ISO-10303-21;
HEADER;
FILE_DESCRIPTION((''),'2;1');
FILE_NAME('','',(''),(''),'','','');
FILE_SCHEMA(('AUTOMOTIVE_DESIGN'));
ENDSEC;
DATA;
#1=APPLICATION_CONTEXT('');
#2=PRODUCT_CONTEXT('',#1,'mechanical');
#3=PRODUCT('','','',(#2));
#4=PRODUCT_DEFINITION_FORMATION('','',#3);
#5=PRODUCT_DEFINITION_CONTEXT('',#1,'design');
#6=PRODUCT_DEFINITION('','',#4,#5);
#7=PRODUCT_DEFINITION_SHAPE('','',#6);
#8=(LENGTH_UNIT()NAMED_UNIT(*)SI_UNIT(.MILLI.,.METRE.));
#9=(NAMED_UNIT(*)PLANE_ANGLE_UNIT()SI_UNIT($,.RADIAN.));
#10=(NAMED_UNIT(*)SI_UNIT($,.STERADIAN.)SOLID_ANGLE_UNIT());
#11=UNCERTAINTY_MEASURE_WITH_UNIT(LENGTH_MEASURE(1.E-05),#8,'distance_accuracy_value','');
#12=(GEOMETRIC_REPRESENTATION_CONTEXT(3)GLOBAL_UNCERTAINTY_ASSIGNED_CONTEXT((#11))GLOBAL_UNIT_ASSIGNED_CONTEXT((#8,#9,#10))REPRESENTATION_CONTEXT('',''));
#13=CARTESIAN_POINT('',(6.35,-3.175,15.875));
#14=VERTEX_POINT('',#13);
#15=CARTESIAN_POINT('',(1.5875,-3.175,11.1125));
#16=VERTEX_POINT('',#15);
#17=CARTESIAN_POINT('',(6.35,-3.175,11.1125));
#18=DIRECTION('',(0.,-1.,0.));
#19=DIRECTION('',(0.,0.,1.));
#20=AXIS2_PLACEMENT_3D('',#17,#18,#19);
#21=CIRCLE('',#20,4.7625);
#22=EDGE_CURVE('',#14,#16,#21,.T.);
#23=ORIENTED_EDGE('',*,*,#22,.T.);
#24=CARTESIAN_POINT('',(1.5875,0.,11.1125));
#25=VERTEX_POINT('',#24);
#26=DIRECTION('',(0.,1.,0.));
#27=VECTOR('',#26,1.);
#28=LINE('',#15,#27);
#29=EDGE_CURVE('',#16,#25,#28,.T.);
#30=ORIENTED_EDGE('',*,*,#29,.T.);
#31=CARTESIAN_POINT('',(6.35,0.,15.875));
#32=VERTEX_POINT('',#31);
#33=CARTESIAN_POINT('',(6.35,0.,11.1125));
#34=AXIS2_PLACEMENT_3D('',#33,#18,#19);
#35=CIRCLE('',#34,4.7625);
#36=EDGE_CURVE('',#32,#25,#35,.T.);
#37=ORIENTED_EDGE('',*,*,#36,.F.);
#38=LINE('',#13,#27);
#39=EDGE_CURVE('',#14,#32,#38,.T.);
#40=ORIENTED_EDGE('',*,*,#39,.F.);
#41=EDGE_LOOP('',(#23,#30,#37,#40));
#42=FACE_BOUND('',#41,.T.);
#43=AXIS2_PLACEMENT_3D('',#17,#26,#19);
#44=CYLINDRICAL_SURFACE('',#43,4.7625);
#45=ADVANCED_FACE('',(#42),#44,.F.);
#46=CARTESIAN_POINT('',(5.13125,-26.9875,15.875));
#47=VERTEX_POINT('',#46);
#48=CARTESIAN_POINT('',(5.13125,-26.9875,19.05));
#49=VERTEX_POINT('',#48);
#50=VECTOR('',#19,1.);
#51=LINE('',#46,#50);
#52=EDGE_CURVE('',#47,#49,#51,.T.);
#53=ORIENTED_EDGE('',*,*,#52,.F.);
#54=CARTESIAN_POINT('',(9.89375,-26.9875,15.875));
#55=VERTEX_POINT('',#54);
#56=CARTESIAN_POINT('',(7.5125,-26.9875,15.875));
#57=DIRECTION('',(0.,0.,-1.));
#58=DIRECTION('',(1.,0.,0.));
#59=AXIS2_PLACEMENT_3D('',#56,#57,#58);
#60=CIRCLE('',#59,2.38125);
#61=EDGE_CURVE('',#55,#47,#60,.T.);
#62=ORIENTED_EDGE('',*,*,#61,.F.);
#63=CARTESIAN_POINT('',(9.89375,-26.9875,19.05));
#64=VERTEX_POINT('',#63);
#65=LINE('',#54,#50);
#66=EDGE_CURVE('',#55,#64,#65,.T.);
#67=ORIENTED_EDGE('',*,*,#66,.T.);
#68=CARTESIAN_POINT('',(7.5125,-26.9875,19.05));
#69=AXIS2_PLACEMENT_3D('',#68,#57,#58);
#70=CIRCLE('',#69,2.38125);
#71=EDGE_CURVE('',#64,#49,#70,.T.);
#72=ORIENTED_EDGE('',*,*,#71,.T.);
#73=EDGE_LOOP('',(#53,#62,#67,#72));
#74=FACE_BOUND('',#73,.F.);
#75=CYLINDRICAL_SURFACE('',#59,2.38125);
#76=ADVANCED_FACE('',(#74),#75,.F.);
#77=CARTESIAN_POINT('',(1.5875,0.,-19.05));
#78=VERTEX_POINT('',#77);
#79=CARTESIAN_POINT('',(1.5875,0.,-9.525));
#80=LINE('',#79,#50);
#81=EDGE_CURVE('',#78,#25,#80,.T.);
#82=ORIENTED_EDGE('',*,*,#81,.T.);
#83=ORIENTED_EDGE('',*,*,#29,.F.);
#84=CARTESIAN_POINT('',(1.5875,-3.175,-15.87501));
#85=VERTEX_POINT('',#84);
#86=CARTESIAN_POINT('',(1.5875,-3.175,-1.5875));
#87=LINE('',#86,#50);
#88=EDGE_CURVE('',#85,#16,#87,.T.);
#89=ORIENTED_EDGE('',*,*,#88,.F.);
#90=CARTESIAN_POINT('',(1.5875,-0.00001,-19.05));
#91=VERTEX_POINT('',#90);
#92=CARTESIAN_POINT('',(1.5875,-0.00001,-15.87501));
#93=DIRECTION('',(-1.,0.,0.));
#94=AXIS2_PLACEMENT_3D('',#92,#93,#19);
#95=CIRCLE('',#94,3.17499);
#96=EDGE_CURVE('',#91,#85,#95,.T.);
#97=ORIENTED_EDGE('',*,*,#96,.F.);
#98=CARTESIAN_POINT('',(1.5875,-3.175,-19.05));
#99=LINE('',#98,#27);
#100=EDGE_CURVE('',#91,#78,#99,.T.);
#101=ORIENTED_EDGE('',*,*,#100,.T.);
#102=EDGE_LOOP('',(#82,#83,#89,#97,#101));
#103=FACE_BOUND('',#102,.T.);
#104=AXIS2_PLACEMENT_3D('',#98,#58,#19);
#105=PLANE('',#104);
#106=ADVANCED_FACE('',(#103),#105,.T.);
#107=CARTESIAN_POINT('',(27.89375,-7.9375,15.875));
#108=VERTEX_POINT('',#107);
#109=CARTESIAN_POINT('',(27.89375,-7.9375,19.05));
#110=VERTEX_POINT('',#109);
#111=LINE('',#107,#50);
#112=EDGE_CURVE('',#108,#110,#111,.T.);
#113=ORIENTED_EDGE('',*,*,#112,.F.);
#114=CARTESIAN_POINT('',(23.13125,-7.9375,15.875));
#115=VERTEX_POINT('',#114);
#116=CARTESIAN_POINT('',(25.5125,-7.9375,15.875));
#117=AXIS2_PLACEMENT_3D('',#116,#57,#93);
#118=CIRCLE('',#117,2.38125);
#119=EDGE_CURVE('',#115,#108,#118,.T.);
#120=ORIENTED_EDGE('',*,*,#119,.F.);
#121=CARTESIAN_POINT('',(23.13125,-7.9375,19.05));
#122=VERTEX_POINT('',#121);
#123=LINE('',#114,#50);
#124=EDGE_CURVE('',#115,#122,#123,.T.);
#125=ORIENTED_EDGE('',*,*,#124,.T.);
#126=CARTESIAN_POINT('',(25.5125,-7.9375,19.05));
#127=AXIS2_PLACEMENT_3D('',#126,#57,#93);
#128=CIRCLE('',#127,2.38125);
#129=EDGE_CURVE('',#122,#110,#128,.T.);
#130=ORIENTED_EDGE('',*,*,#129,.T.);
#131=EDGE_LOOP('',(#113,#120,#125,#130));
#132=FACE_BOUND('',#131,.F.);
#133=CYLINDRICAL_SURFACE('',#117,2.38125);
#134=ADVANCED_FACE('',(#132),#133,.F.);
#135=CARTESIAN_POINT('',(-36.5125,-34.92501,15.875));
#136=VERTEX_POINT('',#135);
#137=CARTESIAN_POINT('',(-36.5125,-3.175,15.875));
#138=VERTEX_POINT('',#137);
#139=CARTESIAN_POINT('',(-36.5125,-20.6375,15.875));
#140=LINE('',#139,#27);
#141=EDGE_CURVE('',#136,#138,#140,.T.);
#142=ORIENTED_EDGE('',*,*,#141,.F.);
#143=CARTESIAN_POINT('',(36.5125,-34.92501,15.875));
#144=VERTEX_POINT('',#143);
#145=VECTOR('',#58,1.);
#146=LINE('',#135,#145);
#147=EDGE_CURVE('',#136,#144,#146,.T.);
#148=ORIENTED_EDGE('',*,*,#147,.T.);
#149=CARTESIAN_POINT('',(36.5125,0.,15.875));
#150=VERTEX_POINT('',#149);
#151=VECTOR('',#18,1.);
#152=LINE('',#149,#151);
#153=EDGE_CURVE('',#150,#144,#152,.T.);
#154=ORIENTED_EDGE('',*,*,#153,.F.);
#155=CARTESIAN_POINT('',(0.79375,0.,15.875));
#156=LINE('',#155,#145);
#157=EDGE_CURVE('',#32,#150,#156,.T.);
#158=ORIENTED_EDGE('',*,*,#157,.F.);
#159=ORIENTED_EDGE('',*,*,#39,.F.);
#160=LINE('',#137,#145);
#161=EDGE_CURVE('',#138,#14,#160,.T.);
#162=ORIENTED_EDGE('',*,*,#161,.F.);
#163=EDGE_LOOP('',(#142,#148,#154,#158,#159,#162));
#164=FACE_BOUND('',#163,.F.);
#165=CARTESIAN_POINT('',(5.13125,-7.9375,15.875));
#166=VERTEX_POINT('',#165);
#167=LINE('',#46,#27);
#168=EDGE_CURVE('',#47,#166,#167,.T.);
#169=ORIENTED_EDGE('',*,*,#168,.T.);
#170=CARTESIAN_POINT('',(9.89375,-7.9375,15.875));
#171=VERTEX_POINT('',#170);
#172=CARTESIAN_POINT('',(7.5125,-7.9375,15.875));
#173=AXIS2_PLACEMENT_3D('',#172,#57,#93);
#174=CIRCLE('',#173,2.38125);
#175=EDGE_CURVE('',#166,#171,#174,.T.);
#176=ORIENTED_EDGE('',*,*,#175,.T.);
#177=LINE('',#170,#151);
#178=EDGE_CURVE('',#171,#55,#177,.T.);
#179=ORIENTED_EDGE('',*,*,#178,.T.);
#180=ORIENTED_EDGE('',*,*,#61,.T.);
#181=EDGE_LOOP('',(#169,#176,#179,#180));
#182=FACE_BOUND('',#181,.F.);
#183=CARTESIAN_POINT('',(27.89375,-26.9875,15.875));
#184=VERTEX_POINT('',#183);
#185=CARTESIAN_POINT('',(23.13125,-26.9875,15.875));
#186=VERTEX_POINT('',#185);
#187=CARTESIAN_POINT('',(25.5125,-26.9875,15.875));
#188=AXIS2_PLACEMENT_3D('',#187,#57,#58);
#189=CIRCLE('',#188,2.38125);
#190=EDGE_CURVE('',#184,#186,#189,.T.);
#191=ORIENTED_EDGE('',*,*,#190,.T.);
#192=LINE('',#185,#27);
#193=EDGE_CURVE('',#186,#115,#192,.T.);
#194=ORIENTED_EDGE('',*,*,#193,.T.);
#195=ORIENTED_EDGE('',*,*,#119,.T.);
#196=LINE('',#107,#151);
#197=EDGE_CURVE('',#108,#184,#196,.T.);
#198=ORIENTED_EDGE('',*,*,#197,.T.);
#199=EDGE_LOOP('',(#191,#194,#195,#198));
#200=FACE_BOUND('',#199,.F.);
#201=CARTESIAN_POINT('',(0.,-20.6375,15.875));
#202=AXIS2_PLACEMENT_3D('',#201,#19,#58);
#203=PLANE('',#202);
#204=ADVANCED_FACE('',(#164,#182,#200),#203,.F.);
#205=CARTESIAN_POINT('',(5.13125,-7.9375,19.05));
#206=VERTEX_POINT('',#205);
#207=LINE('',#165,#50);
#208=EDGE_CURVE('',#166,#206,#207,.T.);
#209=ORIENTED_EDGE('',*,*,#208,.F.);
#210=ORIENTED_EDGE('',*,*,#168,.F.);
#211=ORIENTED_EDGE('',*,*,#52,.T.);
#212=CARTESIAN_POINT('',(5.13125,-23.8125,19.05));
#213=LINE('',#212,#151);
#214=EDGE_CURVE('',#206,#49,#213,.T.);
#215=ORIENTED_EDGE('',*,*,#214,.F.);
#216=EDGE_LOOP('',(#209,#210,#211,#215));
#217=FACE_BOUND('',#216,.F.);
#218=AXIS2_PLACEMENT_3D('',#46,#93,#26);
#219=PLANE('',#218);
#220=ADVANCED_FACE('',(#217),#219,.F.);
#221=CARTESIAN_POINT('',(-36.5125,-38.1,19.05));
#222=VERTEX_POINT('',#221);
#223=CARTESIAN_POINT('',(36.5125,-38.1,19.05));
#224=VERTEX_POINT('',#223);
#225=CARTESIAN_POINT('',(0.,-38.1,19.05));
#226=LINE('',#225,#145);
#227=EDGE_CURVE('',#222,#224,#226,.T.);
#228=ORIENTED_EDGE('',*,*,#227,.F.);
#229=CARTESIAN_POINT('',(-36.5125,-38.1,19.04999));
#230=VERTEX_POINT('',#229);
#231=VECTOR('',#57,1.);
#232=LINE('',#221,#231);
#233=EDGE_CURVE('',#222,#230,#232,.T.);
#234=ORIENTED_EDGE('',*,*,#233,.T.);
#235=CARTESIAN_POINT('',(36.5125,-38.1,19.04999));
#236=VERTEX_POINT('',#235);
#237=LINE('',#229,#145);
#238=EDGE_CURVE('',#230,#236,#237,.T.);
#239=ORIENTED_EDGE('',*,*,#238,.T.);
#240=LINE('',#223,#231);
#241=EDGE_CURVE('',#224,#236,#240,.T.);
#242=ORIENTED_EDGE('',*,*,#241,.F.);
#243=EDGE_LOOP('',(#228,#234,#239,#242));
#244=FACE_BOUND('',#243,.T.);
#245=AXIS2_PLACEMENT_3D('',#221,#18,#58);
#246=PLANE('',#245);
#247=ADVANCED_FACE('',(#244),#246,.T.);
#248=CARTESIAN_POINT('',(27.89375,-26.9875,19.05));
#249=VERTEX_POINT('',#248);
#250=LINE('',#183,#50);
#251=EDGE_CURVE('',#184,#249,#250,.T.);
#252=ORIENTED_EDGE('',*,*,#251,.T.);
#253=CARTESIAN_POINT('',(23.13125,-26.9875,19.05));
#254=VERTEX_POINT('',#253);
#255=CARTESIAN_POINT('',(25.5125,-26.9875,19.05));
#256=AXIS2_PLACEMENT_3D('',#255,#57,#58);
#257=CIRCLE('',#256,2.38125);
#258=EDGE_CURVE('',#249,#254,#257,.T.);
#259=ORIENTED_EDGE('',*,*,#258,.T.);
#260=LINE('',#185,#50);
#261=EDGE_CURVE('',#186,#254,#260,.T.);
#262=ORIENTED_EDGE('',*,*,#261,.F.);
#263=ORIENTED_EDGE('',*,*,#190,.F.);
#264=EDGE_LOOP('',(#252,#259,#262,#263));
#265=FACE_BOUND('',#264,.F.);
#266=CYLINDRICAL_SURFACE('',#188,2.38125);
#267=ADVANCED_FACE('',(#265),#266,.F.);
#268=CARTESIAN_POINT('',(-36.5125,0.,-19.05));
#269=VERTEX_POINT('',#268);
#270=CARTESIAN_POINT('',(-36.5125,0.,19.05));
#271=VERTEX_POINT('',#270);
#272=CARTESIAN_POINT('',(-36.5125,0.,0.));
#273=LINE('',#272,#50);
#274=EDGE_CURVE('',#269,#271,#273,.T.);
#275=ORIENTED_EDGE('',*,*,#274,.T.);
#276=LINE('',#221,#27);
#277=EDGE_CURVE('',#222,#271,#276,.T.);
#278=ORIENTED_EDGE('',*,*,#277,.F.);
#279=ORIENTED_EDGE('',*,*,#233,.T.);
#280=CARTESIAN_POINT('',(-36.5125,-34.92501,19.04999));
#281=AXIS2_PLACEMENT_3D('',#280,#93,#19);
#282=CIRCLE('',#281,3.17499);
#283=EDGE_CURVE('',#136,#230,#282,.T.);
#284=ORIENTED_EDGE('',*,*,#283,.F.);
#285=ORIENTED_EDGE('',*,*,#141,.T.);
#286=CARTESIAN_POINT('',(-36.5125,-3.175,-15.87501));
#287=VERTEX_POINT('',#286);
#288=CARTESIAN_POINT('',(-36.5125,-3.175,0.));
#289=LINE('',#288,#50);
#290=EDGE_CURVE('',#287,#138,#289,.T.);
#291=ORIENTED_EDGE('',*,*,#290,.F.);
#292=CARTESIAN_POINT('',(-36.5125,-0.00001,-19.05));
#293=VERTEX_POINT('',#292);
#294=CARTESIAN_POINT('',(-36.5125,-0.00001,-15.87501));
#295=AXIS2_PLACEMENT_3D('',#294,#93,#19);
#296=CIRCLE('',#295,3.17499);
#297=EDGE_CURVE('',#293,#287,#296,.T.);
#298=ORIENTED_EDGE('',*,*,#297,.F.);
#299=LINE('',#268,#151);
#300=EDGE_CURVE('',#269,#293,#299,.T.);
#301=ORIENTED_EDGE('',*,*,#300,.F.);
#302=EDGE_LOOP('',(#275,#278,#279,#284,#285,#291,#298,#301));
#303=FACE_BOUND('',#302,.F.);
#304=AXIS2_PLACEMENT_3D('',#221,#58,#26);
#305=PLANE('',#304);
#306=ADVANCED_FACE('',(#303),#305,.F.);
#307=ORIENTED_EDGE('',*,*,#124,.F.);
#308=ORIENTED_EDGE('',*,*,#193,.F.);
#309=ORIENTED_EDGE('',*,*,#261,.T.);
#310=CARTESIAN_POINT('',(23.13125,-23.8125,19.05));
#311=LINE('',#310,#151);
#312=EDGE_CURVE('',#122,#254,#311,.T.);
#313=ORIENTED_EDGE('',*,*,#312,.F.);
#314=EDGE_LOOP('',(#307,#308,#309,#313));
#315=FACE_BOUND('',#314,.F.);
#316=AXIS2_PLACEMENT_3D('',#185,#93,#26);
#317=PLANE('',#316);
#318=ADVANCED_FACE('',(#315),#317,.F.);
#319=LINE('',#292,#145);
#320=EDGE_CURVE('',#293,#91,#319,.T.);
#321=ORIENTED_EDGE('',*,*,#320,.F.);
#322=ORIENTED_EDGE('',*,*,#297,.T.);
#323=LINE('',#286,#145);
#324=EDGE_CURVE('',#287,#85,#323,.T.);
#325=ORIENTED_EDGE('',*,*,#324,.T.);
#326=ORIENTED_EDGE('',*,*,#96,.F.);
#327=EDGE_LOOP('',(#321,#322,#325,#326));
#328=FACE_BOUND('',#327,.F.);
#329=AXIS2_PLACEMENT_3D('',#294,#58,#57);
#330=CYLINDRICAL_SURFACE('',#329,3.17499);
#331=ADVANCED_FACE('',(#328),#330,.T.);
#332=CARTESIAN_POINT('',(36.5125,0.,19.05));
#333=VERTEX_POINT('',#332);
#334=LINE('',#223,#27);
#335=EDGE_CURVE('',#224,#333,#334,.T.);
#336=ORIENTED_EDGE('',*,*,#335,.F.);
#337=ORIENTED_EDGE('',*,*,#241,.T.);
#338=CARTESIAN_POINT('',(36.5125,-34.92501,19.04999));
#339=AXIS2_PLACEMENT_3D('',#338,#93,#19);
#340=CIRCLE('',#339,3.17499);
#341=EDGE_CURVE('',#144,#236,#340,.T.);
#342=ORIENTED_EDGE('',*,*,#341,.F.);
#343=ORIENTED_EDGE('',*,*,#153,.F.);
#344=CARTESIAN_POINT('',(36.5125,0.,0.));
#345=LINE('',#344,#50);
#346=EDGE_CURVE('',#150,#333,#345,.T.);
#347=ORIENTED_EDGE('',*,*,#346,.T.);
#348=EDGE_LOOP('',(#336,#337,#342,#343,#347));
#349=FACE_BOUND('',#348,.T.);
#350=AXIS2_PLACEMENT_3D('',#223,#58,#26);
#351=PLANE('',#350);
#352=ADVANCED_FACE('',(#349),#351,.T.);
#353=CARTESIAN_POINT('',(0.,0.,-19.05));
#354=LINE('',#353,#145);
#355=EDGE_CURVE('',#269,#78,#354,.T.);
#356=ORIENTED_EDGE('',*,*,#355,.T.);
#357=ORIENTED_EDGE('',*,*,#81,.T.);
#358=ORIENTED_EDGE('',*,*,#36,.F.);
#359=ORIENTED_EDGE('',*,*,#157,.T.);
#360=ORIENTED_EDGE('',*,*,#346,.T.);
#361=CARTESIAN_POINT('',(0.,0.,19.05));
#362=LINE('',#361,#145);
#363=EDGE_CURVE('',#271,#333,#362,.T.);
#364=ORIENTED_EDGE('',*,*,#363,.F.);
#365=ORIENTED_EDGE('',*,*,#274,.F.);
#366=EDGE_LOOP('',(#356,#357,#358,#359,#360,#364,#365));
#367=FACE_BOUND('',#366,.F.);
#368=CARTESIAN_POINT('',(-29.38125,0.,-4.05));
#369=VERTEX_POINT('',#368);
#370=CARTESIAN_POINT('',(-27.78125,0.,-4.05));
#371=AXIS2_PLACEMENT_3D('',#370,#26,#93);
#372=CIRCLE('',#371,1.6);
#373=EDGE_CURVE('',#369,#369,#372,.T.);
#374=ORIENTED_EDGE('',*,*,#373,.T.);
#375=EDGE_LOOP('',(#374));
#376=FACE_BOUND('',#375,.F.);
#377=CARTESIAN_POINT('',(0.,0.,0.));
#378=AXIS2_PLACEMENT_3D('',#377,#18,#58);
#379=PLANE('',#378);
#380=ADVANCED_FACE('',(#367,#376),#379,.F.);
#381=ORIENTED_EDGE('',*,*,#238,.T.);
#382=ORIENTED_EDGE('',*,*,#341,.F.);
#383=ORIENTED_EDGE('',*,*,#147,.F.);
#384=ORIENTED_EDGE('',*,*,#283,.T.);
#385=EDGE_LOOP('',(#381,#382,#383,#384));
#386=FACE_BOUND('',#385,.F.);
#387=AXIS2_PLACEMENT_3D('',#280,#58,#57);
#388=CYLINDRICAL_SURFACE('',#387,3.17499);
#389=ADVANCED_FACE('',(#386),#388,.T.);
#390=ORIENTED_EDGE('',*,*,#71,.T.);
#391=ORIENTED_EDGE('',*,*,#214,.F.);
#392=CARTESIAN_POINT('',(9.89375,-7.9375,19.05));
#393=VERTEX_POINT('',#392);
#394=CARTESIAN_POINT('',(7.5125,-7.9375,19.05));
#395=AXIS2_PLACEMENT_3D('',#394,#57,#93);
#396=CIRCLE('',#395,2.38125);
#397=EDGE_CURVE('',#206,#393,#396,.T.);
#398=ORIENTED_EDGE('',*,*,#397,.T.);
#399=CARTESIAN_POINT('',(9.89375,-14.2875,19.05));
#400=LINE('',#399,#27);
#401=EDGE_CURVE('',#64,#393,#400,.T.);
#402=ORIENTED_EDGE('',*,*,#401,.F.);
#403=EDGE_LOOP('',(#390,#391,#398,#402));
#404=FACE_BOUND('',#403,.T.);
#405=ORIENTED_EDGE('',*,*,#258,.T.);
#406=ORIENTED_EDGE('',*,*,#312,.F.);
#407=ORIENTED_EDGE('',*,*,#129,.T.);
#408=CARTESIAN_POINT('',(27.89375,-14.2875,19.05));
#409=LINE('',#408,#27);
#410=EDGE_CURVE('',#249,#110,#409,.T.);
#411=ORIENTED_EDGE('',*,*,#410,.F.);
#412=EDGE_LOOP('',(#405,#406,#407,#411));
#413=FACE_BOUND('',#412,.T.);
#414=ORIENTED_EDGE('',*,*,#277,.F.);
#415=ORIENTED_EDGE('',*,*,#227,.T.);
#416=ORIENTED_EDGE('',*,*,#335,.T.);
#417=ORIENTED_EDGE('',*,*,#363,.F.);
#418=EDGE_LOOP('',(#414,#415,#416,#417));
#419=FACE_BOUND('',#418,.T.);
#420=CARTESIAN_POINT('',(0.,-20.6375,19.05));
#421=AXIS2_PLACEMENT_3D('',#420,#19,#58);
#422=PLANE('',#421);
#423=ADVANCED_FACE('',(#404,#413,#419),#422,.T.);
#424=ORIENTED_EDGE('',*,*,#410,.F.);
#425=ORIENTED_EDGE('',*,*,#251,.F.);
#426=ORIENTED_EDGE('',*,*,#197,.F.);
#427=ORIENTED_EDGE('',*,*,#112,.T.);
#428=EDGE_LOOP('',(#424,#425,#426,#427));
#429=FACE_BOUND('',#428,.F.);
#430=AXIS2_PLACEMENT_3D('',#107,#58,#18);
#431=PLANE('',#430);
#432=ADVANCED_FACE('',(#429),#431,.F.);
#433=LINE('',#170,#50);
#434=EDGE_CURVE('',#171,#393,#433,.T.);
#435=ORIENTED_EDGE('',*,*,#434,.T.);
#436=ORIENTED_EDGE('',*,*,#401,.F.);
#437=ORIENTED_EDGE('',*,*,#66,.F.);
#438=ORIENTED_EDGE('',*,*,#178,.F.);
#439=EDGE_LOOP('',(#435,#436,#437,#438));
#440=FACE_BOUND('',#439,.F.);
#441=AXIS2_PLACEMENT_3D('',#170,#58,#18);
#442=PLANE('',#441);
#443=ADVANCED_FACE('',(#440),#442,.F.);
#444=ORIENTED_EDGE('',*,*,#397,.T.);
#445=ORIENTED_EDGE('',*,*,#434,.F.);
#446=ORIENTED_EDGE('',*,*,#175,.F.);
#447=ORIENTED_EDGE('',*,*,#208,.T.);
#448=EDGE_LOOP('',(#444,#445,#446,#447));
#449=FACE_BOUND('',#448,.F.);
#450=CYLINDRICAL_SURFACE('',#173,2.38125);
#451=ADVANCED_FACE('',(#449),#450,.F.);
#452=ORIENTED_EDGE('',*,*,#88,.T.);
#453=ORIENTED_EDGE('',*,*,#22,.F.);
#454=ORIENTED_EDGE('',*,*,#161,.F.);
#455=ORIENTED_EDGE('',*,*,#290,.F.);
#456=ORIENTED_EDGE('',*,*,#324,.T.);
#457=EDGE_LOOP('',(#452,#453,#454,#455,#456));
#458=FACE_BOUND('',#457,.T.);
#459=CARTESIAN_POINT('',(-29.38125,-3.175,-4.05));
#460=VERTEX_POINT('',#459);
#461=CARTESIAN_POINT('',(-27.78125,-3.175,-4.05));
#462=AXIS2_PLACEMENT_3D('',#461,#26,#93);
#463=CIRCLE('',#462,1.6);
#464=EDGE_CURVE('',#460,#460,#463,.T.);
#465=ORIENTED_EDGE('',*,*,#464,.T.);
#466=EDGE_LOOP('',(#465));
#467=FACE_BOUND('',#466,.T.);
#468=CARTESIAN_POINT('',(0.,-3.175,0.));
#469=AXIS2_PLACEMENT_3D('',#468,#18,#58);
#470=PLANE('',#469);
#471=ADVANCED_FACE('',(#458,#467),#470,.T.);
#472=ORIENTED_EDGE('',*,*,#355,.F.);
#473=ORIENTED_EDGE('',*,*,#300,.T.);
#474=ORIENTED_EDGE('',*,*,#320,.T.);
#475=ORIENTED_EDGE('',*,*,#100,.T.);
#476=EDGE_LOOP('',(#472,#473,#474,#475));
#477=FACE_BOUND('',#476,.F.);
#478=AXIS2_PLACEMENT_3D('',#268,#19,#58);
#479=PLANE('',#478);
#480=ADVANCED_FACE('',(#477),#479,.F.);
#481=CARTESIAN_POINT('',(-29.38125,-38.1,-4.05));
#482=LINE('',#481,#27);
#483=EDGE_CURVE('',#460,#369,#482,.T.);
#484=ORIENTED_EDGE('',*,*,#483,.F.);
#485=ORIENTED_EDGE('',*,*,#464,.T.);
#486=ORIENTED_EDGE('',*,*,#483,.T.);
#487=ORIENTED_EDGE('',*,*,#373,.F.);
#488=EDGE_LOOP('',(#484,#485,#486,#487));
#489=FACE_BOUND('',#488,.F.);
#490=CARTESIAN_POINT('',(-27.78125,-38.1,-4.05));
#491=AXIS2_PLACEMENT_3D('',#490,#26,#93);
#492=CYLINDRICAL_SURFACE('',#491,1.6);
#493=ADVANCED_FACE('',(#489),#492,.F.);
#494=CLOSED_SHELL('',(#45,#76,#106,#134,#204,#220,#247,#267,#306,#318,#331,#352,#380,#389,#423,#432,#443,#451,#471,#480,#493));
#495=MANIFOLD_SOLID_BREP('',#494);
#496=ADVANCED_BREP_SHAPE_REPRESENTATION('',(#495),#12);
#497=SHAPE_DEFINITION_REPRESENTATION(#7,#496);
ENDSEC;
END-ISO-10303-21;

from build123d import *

# Parameters (mm, degrees)
F0_W     = 73.025
F0_H     = 38.1
F1_DEPTH = 3.175
F2_W     = 73.025
F2_H     = 34.925
F3_DEPTH = 3.175
F5_D     = 3.2
F5_DEPTH = 34.925
F5_TIP   = 0.9613769904
F7_DEPTH = 3.176
F8_W     = 34.925
F8_H     = 34.925
F9_DEPTH = 3.176
F10_R    = 3.17499
F11_R    = 4.7625


# Not quite as in the source:
# - a fillet or chamfer is up to 0.001 mm smaller than in the source, because OpenCascade refuses the exact size


with BuildPart() as f1:
    # F0 (on Front) → F1 (new body)
    with BuildSketch(Plane.XZ):
        Rectangle(F0_W, F0_H)
    extrude(amount=F1_DEPTH)

    # F2 (on face) → F3 (join)
    with BuildSketch(Plane.XY.offset(19.05)):
        with Locations((0, -20.6375)):
            Rectangle(F2_W, F2_H)
    extrude(amount=-F3_DEPTH)

    # F5
    with Locations(Plane.XZ.offset(3.175)):
        with Locations((-27.78125, -4.05)):
            Hole(F5_D / 2, depth=F5_DEPTH)
            with Locations((0, 0, -(F5_DEPTH + F5_TIP / 2))):  # 118° drill point
                Cone(0, F5_D / 2, F5_TIP, mode=Mode.SUBTRACT)

    # F6 (on face) → F7 (cut, through all)
    with BuildSketch(Plane(origin=(0, 0, 15.875), x_dir=(1, 0, 0), z_dir=(0, 0, -1))):
        with BuildLine():
            ThreePointArc((5.13125, 7.9375), (7.5125, 5.55625), (9.89375, 7.9375))
            Line((9.89375, 7.9375), (9.89375, 26.9875))
            ThreePointArc((9.89375, 26.9875), (7.5125, 29.36875), (5.13125, 26.9875))
            Line((5.13125, 26.9875), (5.13125, 7.9375))
        make_face()
        with BuildLine():
            ThreePointArc((23.13125, 7.9375), (25.5125, 5.55625), (27.89375, 7.9375))
            Line((27.89375, 7.9375), (27.89375, 26.9875))
            ThreePointArc((27.89375, 26.9875), (25.5125, 29.36875), (23.13125, 26.9875))
            Line((23.13125, 26.9875), (23.13125, 7.9375))
        make_face()
    extrude(amount=-F7_DEPTH, mode=Mode.SUBTRACT)

    # F8 (on face) → F9 (cut, through all)
    with BuildSketch(Plane.XZ.offset(3.175)):
        with Locations((19.05, -1.5875)):
            Rectangle(F8_W, F8_H)
    extrude(amount=-F9_DEPTH, mode=Mode.SUBTRACT)

    # F10 (radius 3.175 in the source; OpenCascade refuses exactly that, so slightly less here)
    f10_edges = [f1.edges().sort_by_distance(p)[0] for p in [
        (0, -38.1, 15.875),
        (-17.4625, -3.175, -19.05),
    ]]
    fillet(f10_edges, radius=F10_R)

    # F11
    f11_edges = [f1.edges().sort_by_distance(p)[0] for p in [
        (1.5875, -1.5875, 15.875),
    ]]
    fillet(f11_edges, radius=F11_R)


solid = f1.part
